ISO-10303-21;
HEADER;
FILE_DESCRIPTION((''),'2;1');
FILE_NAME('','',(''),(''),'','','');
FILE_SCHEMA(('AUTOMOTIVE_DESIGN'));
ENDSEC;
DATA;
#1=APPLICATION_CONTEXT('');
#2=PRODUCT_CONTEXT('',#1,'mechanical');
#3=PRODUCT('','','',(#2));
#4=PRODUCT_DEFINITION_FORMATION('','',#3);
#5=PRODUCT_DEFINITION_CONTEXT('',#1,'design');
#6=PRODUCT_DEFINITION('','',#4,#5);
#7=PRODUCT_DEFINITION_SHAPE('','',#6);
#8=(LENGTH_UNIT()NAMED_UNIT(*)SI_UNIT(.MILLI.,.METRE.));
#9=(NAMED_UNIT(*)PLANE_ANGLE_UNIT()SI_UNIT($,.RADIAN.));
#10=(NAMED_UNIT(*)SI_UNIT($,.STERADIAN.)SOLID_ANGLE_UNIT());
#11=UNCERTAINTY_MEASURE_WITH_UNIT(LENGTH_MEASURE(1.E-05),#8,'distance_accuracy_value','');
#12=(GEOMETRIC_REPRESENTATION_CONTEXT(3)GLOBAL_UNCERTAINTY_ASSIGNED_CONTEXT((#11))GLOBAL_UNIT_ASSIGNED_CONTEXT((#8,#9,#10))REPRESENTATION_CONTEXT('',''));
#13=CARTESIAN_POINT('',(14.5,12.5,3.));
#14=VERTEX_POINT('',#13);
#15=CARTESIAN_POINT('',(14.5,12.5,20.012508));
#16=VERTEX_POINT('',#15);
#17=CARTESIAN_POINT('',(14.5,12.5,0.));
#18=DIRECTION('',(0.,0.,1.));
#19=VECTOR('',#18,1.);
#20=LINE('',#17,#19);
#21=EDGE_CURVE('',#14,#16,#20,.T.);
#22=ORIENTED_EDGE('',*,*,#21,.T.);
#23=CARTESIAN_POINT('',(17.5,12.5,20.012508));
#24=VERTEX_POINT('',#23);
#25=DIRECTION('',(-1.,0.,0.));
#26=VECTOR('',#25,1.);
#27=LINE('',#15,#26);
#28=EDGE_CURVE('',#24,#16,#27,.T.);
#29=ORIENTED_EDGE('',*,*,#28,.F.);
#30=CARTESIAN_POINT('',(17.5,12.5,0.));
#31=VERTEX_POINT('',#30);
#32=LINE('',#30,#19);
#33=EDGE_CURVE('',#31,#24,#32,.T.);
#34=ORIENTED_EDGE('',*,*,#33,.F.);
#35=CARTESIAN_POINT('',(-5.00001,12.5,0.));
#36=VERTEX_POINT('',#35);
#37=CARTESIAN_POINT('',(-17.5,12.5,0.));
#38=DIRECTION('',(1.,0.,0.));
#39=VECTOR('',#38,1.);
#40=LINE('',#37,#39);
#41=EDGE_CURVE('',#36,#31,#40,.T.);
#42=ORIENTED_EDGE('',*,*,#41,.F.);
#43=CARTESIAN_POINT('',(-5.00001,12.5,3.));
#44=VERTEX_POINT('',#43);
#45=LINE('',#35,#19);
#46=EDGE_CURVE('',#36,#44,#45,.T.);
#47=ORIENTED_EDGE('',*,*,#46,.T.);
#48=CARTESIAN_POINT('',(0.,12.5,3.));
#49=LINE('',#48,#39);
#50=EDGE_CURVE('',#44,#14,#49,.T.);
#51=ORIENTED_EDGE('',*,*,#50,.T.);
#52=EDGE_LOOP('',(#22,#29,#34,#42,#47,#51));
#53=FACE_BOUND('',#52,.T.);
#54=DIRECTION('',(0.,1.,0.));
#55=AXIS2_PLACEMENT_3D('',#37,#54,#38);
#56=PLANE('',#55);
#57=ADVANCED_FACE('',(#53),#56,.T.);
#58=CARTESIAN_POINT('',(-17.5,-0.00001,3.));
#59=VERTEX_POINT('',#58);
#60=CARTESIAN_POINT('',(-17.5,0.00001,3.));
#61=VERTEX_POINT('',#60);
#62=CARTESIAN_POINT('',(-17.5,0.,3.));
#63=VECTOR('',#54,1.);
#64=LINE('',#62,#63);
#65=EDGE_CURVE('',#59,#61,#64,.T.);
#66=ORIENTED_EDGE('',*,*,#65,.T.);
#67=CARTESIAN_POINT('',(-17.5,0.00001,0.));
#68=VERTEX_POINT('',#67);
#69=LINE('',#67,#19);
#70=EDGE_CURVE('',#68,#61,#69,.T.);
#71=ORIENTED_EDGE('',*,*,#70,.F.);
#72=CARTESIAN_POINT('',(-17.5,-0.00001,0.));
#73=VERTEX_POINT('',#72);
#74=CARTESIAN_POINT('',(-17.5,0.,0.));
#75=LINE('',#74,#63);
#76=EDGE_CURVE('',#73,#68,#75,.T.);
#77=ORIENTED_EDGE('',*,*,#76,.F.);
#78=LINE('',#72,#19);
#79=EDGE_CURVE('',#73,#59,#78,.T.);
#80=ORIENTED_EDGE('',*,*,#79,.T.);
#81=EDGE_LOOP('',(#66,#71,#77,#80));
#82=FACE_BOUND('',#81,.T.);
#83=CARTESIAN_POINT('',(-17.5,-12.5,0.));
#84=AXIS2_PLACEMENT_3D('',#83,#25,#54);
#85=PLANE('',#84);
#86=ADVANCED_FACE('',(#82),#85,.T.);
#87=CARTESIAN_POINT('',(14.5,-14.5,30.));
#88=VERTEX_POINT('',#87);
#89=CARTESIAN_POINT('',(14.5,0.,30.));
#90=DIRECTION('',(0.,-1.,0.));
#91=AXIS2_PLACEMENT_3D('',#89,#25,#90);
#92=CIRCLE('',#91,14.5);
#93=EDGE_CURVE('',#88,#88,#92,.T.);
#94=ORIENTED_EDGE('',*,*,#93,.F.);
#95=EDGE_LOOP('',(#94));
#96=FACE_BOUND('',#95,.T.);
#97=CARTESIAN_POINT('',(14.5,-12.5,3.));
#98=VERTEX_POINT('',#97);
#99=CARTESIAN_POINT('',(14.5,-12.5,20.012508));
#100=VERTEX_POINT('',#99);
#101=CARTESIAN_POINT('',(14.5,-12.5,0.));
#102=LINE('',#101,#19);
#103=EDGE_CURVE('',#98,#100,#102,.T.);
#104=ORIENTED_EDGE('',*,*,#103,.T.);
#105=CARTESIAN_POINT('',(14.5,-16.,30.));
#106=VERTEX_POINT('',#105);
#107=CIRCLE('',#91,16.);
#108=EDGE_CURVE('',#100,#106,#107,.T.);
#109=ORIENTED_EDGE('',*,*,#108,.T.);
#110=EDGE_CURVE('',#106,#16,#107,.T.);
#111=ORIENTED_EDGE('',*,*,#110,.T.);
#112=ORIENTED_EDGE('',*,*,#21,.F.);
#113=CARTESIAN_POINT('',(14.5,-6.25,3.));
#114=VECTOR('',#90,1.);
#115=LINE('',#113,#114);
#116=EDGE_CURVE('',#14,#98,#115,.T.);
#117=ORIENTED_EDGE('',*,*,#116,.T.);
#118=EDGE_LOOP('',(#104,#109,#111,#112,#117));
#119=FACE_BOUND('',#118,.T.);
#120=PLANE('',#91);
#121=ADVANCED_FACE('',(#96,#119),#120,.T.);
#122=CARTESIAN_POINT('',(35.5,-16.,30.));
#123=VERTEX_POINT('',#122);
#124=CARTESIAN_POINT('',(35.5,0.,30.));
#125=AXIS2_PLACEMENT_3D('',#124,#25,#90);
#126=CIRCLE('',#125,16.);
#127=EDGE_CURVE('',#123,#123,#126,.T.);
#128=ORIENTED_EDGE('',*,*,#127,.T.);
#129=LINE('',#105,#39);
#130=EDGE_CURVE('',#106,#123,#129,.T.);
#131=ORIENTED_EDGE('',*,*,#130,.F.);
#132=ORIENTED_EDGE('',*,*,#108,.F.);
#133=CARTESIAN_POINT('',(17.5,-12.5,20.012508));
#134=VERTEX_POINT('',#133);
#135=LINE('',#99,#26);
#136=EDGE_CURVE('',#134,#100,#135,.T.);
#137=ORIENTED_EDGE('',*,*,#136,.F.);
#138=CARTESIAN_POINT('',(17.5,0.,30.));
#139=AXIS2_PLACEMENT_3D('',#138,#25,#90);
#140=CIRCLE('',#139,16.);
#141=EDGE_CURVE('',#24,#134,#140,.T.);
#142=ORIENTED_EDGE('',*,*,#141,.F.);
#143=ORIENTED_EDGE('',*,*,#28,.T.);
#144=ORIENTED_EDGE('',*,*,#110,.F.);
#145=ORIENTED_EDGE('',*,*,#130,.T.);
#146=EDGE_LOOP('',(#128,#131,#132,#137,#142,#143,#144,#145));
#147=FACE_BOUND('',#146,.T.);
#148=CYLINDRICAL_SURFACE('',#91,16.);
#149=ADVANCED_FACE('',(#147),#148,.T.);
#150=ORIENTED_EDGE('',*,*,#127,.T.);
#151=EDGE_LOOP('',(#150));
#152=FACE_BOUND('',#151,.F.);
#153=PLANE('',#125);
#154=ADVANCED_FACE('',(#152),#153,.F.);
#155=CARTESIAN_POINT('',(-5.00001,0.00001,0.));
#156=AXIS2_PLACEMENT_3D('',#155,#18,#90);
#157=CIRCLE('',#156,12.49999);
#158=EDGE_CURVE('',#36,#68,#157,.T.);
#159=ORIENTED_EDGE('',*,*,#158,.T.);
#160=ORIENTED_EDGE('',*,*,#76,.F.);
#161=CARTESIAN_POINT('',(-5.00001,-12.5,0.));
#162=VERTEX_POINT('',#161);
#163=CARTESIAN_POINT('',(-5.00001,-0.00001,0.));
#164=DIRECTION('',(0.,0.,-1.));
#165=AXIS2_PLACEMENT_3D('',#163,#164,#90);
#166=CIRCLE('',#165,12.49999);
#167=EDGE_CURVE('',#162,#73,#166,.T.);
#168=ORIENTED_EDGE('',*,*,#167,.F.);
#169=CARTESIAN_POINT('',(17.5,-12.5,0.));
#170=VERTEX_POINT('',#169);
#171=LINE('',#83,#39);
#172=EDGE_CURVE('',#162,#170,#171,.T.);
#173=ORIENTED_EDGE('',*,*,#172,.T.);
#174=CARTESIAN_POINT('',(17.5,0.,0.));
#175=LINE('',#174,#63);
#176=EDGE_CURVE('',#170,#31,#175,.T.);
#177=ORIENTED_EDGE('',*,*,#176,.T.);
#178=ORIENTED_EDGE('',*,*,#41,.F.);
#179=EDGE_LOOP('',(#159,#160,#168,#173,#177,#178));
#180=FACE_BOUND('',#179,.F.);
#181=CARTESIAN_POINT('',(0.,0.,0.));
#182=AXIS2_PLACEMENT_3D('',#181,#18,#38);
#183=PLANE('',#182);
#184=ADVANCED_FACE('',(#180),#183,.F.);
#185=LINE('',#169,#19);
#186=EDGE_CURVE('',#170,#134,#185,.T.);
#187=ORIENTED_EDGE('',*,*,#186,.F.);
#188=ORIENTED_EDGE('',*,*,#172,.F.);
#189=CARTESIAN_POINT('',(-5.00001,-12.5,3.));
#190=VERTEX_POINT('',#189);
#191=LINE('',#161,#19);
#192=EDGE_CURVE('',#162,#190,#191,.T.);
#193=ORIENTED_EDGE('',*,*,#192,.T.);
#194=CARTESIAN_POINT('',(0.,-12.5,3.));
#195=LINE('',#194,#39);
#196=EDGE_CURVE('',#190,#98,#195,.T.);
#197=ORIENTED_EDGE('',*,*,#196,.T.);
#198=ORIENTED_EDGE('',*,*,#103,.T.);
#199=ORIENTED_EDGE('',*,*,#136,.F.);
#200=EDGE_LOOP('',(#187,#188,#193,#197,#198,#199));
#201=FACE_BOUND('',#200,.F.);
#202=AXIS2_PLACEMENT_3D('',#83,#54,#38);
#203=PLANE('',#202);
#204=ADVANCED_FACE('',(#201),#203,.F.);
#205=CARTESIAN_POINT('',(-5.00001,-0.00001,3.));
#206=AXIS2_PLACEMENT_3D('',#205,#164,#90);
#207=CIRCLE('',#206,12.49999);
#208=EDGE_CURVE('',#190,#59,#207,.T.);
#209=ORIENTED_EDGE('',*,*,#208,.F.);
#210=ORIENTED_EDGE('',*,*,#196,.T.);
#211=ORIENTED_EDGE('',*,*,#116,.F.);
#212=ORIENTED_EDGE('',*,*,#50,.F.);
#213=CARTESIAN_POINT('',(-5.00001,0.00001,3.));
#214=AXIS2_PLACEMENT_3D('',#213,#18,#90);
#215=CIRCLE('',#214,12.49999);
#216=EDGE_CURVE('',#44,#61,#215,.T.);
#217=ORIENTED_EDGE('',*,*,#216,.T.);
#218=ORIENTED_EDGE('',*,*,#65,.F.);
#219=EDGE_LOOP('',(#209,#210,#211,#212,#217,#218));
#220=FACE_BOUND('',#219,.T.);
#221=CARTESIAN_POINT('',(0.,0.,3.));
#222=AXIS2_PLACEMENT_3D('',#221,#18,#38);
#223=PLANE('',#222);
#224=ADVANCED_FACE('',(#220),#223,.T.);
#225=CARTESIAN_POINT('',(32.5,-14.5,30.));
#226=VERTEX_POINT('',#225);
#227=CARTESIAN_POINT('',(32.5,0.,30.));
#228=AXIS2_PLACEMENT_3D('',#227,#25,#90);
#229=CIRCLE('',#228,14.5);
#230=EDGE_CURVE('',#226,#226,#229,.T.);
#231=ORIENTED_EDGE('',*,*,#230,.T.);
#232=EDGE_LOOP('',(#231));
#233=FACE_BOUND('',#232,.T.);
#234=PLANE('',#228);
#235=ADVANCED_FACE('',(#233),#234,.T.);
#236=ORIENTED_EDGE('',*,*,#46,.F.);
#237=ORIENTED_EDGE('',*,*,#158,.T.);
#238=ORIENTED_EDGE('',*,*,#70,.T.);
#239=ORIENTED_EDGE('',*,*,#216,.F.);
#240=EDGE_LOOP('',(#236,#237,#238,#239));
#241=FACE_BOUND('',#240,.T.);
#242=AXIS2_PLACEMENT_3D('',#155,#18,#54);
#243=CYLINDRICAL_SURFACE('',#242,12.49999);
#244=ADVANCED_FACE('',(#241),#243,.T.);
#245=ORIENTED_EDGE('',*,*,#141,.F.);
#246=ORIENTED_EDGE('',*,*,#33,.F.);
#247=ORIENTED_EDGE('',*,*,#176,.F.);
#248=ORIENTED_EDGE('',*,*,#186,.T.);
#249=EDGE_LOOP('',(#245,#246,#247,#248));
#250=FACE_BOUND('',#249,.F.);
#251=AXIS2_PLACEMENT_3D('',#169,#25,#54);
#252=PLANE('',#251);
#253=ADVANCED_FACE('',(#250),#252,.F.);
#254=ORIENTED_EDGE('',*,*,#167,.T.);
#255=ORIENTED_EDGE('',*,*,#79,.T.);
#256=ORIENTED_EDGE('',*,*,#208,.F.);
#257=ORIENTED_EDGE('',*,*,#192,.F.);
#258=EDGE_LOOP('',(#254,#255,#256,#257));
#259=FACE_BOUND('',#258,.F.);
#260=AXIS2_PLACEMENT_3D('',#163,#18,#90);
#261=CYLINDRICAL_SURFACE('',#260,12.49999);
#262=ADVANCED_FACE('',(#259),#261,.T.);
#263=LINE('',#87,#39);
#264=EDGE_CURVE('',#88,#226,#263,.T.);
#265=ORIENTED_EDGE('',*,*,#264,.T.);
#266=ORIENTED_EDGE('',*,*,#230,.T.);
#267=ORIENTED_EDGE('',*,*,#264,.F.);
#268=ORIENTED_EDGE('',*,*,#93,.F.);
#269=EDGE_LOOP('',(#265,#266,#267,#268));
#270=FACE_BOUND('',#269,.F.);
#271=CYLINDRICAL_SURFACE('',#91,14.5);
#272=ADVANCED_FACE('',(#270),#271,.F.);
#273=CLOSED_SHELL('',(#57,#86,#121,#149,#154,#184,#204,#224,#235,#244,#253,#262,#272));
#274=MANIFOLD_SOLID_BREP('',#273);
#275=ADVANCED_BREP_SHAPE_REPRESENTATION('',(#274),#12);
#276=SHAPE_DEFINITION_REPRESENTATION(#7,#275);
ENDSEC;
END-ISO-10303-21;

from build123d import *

# Parameters (mm, degrees)
F0_W     = 35
F0_H     = 25
F1_DEPTH = 3
F2_W     = 3
F2_H     = 25
F3_DEPTH = 40
F4_R     = 12.49999
F5_R     = 12.49999
F6_R     = 16
F7_DEPTH = 21
F8_R     = 14.5
F9_DEPTH = 18


# Not quite as in the source:
# - a fillet or chamfer is up to 0.001 mm smaller than in the source, because OpenCascade refuses the exact size


with BuildPart() as f1:
    # F0 (on Top) → F1 (new body)
    with BuildSketch(Plane.XY):
        Rectangle(F0_W, F0_H)
    extrude(amount=F1_DEPTH)

    # F2 (on Top) → F3 (join)
    with BuildSketch(Plane.XY):
        with Locations((16, 0)):
            Rectangle(F2_W, F2_H)
    extrude(amount=F3_DEPTH)

    # F4 (radius 12.5 in the source; OpenCascade refuses exactly that, so slightly less here)
    f4_edges = [f1.edges().sort_by_distance(p)[0] for p in [
        (-17.5, 12.5, 1.5),
        (-17.5, -12.5, 1.5),
    ]]
    fillet(f4_edges, radius=F4_R)

    # F5 (radius 12.5 in the source; OpenCascade refuses exactly that, so slightly less here)
    f5_edges = [f1.edges().sort_by_distance(p)[0] for p in [
        (16, 12.5, 40),
        (16, -12.5, 40),
    ]]
    fillet(f5_edges, radius=F5_R)

    # F6 (on face) → F7 (join)
    with BuildSketch(Plane(origin=(14.5, 0, 0), x_dir=(0, -1, 0), z_dir=(-1, 0, 0))):
        with Locations((0, 30)):
            Circle(F6_R)
    extrude(amount=-F7_DEPTH)

    # F8 (on face) → F9 (cut)
    with BuildSketch(Plane(origin=(14.5, 0, 0), x_dir=(0, -1, 0), z_dir=(-1, 0, 0))):
        with Locations((0, 30)):
            Circle(F8_R)
    extrude(amount=-F9_DEPTH, mode=Mode.SUBTRACT)


solid = f1.part
